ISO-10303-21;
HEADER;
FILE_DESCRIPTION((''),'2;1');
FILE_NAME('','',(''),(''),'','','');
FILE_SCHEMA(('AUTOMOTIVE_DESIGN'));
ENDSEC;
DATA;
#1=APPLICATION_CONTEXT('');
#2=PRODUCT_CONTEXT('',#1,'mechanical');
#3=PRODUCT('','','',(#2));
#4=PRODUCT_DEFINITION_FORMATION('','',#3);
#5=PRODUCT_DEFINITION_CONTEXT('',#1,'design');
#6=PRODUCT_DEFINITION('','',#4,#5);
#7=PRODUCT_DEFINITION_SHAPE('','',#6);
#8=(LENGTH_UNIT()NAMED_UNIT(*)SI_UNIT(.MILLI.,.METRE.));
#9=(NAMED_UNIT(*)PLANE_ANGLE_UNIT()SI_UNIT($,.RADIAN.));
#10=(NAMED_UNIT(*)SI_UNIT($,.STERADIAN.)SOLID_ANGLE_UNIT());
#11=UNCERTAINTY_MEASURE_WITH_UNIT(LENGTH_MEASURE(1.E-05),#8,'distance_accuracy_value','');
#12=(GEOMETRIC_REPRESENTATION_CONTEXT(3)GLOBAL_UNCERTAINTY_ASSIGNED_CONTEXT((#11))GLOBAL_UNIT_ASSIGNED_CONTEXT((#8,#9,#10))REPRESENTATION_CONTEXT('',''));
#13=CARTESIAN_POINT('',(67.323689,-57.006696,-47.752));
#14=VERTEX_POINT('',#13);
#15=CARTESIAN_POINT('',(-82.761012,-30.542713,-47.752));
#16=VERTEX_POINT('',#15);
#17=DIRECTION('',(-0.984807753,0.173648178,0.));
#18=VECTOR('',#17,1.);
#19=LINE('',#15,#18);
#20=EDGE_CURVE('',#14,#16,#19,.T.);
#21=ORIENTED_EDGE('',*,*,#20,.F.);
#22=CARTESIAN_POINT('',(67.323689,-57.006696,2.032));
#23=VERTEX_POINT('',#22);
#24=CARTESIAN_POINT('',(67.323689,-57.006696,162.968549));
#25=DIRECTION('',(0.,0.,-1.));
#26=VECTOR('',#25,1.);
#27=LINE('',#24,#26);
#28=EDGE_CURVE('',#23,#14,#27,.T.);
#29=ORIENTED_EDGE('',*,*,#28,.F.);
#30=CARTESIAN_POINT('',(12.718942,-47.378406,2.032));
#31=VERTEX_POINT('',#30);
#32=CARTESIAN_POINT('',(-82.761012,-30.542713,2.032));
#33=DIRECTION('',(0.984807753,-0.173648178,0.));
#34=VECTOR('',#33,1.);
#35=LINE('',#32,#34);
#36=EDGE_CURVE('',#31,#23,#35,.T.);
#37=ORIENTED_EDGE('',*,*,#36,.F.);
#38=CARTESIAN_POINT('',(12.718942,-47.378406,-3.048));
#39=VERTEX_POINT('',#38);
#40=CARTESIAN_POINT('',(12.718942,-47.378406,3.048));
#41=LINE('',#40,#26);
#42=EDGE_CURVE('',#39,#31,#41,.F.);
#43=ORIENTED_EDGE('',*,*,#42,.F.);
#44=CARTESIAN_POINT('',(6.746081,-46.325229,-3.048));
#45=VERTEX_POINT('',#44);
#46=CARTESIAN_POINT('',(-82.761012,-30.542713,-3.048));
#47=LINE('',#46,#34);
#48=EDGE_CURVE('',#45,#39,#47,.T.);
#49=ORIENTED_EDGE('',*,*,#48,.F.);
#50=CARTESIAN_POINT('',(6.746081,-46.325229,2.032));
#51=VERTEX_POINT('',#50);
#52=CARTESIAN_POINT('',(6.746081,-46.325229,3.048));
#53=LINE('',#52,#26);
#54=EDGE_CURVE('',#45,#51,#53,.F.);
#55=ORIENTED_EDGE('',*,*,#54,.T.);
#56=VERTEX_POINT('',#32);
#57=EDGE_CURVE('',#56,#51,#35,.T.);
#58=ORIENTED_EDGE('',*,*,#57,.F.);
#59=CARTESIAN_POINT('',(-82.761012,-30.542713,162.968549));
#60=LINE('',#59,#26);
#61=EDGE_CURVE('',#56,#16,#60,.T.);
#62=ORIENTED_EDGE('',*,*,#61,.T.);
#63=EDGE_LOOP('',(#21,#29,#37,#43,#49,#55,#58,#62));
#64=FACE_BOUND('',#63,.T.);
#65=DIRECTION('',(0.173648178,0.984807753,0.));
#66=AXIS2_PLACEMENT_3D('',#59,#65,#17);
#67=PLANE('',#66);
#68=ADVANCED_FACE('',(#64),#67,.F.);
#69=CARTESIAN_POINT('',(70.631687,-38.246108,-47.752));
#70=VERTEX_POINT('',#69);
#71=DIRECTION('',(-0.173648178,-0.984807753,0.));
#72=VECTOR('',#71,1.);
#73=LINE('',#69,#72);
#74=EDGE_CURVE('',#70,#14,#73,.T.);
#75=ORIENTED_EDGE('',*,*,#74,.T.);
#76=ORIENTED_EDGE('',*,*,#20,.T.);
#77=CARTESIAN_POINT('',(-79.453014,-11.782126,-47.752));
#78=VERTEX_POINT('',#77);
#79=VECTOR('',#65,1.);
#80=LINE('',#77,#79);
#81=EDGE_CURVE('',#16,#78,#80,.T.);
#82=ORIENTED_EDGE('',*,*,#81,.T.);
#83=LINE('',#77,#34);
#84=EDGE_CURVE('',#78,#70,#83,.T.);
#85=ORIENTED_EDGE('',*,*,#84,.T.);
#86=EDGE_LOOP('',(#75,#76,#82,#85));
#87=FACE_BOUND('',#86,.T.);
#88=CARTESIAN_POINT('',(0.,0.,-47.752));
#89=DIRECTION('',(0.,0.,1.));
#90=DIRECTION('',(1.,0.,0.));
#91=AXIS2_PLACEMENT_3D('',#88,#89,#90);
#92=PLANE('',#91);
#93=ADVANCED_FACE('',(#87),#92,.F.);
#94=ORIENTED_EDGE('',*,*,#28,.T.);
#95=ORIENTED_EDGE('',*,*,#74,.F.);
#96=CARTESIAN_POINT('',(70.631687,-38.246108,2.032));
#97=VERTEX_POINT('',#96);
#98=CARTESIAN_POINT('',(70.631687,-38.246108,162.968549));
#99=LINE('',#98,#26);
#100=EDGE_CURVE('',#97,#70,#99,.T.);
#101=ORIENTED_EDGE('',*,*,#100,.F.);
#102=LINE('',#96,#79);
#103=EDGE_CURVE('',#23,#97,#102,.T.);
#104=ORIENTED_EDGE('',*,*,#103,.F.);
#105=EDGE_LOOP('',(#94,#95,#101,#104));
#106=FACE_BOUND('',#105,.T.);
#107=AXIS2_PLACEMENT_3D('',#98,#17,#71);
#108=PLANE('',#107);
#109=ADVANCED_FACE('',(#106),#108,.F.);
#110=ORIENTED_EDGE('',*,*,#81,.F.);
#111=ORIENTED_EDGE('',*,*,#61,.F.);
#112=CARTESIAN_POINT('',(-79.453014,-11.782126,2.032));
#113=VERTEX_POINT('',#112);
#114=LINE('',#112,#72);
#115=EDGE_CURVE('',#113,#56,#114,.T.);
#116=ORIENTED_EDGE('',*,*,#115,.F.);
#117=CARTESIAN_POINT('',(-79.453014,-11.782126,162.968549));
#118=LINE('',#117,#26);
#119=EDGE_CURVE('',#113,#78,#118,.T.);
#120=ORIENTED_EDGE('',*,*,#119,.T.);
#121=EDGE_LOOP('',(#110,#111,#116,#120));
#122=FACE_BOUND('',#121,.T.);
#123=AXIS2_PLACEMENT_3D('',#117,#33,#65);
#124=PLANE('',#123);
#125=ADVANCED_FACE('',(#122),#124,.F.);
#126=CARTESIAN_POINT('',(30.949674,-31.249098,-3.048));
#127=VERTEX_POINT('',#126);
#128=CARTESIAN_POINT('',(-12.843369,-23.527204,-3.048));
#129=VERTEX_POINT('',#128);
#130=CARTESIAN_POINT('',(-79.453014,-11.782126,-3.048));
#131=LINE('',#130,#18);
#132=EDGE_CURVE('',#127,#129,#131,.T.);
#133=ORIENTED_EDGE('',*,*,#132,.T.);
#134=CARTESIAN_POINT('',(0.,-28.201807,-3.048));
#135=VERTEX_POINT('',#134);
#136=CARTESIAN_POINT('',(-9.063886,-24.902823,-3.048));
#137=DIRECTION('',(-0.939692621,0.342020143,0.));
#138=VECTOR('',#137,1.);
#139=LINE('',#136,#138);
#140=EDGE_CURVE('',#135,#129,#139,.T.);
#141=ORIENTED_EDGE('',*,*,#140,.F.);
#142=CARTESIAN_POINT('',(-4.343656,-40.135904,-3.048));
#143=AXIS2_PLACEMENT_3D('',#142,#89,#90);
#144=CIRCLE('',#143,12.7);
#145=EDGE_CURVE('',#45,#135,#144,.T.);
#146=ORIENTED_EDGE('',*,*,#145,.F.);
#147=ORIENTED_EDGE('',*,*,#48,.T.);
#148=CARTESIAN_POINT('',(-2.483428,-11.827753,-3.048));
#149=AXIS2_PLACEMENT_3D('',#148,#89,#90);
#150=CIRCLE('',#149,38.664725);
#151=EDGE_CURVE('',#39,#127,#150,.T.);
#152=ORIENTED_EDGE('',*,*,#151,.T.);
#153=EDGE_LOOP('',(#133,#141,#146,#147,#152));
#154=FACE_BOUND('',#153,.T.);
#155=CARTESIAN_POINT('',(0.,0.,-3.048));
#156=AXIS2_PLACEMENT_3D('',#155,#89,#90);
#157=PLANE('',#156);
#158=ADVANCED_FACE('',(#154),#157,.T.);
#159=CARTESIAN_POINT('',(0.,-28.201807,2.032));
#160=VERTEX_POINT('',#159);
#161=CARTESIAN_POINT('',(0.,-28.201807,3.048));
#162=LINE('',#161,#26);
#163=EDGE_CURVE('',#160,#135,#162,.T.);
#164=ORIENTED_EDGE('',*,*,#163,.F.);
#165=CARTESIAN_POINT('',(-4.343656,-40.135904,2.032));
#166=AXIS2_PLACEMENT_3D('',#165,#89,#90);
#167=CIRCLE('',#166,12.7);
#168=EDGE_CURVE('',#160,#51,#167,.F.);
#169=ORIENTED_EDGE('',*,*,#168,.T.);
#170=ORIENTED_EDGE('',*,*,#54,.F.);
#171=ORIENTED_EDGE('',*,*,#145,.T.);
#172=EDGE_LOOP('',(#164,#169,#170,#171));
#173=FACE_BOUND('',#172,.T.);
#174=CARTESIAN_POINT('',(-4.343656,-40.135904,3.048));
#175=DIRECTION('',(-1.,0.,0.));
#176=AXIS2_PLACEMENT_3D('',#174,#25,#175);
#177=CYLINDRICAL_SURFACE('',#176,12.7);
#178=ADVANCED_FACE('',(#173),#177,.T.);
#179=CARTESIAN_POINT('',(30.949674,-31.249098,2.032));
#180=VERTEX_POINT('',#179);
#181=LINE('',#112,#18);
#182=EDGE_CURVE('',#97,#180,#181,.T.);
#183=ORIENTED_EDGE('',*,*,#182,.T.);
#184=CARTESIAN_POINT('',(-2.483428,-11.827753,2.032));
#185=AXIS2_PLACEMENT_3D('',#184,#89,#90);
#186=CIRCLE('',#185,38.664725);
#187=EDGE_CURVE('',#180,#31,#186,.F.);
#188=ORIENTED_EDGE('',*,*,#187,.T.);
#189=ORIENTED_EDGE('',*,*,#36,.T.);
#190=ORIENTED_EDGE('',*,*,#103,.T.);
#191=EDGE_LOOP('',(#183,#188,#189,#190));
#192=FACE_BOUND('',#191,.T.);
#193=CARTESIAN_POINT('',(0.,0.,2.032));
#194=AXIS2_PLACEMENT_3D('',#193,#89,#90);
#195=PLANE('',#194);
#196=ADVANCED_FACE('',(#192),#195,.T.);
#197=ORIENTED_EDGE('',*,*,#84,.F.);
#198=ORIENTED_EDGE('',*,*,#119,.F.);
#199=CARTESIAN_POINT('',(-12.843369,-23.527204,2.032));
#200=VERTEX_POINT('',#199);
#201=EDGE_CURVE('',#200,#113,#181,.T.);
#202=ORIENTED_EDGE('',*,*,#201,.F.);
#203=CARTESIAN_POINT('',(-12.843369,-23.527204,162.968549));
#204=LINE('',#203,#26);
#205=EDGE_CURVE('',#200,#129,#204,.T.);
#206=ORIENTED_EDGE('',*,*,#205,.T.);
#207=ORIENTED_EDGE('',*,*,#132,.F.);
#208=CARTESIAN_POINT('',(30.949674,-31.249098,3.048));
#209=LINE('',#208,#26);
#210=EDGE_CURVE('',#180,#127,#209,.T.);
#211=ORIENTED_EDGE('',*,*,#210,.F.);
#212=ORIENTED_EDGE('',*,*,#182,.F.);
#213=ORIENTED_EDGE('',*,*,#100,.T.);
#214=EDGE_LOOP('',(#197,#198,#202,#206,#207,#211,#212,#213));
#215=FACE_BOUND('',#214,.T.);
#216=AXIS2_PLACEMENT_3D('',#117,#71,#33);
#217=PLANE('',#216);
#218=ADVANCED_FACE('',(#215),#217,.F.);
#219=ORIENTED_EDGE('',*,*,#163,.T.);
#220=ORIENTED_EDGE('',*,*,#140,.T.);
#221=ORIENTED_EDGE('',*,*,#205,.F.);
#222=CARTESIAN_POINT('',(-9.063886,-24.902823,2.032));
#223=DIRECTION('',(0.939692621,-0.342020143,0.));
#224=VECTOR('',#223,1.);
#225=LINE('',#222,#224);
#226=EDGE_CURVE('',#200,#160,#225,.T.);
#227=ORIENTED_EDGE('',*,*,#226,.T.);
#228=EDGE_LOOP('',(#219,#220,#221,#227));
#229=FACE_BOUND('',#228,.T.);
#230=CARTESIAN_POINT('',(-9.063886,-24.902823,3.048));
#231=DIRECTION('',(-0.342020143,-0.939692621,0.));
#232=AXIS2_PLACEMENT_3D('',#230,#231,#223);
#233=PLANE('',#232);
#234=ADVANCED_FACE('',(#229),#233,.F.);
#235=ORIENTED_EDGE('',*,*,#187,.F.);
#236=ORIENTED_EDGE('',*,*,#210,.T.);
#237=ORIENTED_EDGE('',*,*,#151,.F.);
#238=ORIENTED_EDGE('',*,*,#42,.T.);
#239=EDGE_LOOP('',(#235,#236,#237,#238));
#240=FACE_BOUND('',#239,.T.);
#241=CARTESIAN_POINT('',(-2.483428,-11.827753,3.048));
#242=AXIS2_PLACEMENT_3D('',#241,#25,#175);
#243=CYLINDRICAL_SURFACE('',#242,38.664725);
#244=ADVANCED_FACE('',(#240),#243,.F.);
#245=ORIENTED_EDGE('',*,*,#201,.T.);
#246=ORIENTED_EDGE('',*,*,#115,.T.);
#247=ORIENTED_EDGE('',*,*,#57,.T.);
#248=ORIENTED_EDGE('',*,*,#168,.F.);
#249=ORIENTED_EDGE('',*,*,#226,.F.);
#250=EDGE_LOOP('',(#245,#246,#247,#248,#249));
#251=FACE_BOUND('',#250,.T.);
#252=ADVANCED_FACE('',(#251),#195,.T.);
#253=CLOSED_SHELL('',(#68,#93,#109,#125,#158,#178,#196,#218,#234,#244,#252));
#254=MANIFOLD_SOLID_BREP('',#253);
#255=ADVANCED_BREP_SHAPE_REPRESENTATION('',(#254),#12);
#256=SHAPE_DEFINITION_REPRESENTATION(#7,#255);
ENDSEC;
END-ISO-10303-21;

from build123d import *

# Parameters (mm, degrees)
BOSS_EXTRUDE1_DEPTH        = 3.048
BOSS_EXTRUDE2_DEPTH        = 2.032
BOSS_EXTRUDE2_DEPTH_BACK   = 47.752
BOSS_EXTRUDE2_2_DEPTH      = 2.032
BOSS_EXTRUDE2_2_DEPTH_BACK = 47.752


with BuildPart() as part:
    # Sketch1 → Boss-Extrude1 (new, symmetric)
    with BuildSketch(Plane.XY):
        with BuildLine():
            ThreePointArc((0, 27.535484012), (-9.412998127, 39.802742006), (0, 52.07))
            Line((0, 52.07), (-11.040532194, 49.111698314))
            ThreePointArc((-11.040532194, 49.111698314), (-39.066320922, 14.192289272), (-14.190605813, -23.03684931))
            Line((-14.190605813, -23.03684931), (0, -28.201807432))
            ThreePointArc((0, -28.201807432), (8.35634418, -40.135903716), (0, -52.07))
            Line((0, -52.07), (10.740686656, -48.160709762))
            ThreePointArc((10.740686656, -48.160709762), (36.144496882, -10.141220984), (7.52373904, 25.519504212))
            Line((7.52373904, 25.519504212), (0, 27.535484012))
        make_face()
        with BuildLine():
            Line((-12.7, 7.332348419), (-1.374815329, 13.870946837))
            ThreePointArc((-1.374815329, 13.870946837), (-0.410875234, 16.198104087), (1.5875, 14.664696837))
            ThreePointArc((1.5875, 14.664696837), (1.533407249, 14.253821603), (1.374815329, 13.870946837))
            Line((1.374815329, 13.870946837), (12.7, 7.332348419))
            Line((12.7, 7.332348419), (12.7, -7.332348419))
            Line((12.7, -7.332348419), (0, -14.664696837))
            Line((0, -14.664696837), (-12.7, -7.332348419))
            Line((-12.7, -7.332348419), (-12.7, 7.332348419))
        make_face(mode=Mode.SUBTRACT)
    extrude(amount=BOSS_EXTRUDE1_DEPTH, both=True)


with BuildPart() as body_2:
    # Sketch2 → Boss-Extrude2 (new, two sides: drawn at the far end of the back side and taken through both)
    with BuildSketch(Plane.XY.offset(-BOSS_EXTRUDE2_DEPTH_BACK)):
        Polygon((-70.631687067, 38.246108065), (79.453014492, 11.782125788), (82.761012277, 30.542713483), (-67.323689282, 57.00669576), align=None)
    extrude(amount=BOSS_EXTRUDE2_DEPTH + BOSS_EXTRUDE2_DEPTH_BACK)


with BuildPart() as body_3:
    # Sketch2 → Boss-Extrude2 2 (new, two sides: drawn at the far end of the back side and taken through both)
    with BuildSketch(Plane.XY.offset(-BOSS_EXTRUDE2_2_DEPTH_BACK)):
        Polygon((-79.453014492, -11.782125788), (70.631687067, -38.246108065), (67.323689282, -57.00669576), (-82.761012277, -30.542713483), align=None)
    extrude(amount=BOSS_EXTRUDE2_2_DEPTH + BOSS_EXTRUDE2_2_DEPTH_BACK)

    # Intersect1: read off the stored shape, not the designer's step
    # Intersect1: cut body 2, part
    add(body_2.part, mode=Mode.SUBTRACT)
    add(part.part, mode=Mode.SUBTRACT)


solid = body_3.part
